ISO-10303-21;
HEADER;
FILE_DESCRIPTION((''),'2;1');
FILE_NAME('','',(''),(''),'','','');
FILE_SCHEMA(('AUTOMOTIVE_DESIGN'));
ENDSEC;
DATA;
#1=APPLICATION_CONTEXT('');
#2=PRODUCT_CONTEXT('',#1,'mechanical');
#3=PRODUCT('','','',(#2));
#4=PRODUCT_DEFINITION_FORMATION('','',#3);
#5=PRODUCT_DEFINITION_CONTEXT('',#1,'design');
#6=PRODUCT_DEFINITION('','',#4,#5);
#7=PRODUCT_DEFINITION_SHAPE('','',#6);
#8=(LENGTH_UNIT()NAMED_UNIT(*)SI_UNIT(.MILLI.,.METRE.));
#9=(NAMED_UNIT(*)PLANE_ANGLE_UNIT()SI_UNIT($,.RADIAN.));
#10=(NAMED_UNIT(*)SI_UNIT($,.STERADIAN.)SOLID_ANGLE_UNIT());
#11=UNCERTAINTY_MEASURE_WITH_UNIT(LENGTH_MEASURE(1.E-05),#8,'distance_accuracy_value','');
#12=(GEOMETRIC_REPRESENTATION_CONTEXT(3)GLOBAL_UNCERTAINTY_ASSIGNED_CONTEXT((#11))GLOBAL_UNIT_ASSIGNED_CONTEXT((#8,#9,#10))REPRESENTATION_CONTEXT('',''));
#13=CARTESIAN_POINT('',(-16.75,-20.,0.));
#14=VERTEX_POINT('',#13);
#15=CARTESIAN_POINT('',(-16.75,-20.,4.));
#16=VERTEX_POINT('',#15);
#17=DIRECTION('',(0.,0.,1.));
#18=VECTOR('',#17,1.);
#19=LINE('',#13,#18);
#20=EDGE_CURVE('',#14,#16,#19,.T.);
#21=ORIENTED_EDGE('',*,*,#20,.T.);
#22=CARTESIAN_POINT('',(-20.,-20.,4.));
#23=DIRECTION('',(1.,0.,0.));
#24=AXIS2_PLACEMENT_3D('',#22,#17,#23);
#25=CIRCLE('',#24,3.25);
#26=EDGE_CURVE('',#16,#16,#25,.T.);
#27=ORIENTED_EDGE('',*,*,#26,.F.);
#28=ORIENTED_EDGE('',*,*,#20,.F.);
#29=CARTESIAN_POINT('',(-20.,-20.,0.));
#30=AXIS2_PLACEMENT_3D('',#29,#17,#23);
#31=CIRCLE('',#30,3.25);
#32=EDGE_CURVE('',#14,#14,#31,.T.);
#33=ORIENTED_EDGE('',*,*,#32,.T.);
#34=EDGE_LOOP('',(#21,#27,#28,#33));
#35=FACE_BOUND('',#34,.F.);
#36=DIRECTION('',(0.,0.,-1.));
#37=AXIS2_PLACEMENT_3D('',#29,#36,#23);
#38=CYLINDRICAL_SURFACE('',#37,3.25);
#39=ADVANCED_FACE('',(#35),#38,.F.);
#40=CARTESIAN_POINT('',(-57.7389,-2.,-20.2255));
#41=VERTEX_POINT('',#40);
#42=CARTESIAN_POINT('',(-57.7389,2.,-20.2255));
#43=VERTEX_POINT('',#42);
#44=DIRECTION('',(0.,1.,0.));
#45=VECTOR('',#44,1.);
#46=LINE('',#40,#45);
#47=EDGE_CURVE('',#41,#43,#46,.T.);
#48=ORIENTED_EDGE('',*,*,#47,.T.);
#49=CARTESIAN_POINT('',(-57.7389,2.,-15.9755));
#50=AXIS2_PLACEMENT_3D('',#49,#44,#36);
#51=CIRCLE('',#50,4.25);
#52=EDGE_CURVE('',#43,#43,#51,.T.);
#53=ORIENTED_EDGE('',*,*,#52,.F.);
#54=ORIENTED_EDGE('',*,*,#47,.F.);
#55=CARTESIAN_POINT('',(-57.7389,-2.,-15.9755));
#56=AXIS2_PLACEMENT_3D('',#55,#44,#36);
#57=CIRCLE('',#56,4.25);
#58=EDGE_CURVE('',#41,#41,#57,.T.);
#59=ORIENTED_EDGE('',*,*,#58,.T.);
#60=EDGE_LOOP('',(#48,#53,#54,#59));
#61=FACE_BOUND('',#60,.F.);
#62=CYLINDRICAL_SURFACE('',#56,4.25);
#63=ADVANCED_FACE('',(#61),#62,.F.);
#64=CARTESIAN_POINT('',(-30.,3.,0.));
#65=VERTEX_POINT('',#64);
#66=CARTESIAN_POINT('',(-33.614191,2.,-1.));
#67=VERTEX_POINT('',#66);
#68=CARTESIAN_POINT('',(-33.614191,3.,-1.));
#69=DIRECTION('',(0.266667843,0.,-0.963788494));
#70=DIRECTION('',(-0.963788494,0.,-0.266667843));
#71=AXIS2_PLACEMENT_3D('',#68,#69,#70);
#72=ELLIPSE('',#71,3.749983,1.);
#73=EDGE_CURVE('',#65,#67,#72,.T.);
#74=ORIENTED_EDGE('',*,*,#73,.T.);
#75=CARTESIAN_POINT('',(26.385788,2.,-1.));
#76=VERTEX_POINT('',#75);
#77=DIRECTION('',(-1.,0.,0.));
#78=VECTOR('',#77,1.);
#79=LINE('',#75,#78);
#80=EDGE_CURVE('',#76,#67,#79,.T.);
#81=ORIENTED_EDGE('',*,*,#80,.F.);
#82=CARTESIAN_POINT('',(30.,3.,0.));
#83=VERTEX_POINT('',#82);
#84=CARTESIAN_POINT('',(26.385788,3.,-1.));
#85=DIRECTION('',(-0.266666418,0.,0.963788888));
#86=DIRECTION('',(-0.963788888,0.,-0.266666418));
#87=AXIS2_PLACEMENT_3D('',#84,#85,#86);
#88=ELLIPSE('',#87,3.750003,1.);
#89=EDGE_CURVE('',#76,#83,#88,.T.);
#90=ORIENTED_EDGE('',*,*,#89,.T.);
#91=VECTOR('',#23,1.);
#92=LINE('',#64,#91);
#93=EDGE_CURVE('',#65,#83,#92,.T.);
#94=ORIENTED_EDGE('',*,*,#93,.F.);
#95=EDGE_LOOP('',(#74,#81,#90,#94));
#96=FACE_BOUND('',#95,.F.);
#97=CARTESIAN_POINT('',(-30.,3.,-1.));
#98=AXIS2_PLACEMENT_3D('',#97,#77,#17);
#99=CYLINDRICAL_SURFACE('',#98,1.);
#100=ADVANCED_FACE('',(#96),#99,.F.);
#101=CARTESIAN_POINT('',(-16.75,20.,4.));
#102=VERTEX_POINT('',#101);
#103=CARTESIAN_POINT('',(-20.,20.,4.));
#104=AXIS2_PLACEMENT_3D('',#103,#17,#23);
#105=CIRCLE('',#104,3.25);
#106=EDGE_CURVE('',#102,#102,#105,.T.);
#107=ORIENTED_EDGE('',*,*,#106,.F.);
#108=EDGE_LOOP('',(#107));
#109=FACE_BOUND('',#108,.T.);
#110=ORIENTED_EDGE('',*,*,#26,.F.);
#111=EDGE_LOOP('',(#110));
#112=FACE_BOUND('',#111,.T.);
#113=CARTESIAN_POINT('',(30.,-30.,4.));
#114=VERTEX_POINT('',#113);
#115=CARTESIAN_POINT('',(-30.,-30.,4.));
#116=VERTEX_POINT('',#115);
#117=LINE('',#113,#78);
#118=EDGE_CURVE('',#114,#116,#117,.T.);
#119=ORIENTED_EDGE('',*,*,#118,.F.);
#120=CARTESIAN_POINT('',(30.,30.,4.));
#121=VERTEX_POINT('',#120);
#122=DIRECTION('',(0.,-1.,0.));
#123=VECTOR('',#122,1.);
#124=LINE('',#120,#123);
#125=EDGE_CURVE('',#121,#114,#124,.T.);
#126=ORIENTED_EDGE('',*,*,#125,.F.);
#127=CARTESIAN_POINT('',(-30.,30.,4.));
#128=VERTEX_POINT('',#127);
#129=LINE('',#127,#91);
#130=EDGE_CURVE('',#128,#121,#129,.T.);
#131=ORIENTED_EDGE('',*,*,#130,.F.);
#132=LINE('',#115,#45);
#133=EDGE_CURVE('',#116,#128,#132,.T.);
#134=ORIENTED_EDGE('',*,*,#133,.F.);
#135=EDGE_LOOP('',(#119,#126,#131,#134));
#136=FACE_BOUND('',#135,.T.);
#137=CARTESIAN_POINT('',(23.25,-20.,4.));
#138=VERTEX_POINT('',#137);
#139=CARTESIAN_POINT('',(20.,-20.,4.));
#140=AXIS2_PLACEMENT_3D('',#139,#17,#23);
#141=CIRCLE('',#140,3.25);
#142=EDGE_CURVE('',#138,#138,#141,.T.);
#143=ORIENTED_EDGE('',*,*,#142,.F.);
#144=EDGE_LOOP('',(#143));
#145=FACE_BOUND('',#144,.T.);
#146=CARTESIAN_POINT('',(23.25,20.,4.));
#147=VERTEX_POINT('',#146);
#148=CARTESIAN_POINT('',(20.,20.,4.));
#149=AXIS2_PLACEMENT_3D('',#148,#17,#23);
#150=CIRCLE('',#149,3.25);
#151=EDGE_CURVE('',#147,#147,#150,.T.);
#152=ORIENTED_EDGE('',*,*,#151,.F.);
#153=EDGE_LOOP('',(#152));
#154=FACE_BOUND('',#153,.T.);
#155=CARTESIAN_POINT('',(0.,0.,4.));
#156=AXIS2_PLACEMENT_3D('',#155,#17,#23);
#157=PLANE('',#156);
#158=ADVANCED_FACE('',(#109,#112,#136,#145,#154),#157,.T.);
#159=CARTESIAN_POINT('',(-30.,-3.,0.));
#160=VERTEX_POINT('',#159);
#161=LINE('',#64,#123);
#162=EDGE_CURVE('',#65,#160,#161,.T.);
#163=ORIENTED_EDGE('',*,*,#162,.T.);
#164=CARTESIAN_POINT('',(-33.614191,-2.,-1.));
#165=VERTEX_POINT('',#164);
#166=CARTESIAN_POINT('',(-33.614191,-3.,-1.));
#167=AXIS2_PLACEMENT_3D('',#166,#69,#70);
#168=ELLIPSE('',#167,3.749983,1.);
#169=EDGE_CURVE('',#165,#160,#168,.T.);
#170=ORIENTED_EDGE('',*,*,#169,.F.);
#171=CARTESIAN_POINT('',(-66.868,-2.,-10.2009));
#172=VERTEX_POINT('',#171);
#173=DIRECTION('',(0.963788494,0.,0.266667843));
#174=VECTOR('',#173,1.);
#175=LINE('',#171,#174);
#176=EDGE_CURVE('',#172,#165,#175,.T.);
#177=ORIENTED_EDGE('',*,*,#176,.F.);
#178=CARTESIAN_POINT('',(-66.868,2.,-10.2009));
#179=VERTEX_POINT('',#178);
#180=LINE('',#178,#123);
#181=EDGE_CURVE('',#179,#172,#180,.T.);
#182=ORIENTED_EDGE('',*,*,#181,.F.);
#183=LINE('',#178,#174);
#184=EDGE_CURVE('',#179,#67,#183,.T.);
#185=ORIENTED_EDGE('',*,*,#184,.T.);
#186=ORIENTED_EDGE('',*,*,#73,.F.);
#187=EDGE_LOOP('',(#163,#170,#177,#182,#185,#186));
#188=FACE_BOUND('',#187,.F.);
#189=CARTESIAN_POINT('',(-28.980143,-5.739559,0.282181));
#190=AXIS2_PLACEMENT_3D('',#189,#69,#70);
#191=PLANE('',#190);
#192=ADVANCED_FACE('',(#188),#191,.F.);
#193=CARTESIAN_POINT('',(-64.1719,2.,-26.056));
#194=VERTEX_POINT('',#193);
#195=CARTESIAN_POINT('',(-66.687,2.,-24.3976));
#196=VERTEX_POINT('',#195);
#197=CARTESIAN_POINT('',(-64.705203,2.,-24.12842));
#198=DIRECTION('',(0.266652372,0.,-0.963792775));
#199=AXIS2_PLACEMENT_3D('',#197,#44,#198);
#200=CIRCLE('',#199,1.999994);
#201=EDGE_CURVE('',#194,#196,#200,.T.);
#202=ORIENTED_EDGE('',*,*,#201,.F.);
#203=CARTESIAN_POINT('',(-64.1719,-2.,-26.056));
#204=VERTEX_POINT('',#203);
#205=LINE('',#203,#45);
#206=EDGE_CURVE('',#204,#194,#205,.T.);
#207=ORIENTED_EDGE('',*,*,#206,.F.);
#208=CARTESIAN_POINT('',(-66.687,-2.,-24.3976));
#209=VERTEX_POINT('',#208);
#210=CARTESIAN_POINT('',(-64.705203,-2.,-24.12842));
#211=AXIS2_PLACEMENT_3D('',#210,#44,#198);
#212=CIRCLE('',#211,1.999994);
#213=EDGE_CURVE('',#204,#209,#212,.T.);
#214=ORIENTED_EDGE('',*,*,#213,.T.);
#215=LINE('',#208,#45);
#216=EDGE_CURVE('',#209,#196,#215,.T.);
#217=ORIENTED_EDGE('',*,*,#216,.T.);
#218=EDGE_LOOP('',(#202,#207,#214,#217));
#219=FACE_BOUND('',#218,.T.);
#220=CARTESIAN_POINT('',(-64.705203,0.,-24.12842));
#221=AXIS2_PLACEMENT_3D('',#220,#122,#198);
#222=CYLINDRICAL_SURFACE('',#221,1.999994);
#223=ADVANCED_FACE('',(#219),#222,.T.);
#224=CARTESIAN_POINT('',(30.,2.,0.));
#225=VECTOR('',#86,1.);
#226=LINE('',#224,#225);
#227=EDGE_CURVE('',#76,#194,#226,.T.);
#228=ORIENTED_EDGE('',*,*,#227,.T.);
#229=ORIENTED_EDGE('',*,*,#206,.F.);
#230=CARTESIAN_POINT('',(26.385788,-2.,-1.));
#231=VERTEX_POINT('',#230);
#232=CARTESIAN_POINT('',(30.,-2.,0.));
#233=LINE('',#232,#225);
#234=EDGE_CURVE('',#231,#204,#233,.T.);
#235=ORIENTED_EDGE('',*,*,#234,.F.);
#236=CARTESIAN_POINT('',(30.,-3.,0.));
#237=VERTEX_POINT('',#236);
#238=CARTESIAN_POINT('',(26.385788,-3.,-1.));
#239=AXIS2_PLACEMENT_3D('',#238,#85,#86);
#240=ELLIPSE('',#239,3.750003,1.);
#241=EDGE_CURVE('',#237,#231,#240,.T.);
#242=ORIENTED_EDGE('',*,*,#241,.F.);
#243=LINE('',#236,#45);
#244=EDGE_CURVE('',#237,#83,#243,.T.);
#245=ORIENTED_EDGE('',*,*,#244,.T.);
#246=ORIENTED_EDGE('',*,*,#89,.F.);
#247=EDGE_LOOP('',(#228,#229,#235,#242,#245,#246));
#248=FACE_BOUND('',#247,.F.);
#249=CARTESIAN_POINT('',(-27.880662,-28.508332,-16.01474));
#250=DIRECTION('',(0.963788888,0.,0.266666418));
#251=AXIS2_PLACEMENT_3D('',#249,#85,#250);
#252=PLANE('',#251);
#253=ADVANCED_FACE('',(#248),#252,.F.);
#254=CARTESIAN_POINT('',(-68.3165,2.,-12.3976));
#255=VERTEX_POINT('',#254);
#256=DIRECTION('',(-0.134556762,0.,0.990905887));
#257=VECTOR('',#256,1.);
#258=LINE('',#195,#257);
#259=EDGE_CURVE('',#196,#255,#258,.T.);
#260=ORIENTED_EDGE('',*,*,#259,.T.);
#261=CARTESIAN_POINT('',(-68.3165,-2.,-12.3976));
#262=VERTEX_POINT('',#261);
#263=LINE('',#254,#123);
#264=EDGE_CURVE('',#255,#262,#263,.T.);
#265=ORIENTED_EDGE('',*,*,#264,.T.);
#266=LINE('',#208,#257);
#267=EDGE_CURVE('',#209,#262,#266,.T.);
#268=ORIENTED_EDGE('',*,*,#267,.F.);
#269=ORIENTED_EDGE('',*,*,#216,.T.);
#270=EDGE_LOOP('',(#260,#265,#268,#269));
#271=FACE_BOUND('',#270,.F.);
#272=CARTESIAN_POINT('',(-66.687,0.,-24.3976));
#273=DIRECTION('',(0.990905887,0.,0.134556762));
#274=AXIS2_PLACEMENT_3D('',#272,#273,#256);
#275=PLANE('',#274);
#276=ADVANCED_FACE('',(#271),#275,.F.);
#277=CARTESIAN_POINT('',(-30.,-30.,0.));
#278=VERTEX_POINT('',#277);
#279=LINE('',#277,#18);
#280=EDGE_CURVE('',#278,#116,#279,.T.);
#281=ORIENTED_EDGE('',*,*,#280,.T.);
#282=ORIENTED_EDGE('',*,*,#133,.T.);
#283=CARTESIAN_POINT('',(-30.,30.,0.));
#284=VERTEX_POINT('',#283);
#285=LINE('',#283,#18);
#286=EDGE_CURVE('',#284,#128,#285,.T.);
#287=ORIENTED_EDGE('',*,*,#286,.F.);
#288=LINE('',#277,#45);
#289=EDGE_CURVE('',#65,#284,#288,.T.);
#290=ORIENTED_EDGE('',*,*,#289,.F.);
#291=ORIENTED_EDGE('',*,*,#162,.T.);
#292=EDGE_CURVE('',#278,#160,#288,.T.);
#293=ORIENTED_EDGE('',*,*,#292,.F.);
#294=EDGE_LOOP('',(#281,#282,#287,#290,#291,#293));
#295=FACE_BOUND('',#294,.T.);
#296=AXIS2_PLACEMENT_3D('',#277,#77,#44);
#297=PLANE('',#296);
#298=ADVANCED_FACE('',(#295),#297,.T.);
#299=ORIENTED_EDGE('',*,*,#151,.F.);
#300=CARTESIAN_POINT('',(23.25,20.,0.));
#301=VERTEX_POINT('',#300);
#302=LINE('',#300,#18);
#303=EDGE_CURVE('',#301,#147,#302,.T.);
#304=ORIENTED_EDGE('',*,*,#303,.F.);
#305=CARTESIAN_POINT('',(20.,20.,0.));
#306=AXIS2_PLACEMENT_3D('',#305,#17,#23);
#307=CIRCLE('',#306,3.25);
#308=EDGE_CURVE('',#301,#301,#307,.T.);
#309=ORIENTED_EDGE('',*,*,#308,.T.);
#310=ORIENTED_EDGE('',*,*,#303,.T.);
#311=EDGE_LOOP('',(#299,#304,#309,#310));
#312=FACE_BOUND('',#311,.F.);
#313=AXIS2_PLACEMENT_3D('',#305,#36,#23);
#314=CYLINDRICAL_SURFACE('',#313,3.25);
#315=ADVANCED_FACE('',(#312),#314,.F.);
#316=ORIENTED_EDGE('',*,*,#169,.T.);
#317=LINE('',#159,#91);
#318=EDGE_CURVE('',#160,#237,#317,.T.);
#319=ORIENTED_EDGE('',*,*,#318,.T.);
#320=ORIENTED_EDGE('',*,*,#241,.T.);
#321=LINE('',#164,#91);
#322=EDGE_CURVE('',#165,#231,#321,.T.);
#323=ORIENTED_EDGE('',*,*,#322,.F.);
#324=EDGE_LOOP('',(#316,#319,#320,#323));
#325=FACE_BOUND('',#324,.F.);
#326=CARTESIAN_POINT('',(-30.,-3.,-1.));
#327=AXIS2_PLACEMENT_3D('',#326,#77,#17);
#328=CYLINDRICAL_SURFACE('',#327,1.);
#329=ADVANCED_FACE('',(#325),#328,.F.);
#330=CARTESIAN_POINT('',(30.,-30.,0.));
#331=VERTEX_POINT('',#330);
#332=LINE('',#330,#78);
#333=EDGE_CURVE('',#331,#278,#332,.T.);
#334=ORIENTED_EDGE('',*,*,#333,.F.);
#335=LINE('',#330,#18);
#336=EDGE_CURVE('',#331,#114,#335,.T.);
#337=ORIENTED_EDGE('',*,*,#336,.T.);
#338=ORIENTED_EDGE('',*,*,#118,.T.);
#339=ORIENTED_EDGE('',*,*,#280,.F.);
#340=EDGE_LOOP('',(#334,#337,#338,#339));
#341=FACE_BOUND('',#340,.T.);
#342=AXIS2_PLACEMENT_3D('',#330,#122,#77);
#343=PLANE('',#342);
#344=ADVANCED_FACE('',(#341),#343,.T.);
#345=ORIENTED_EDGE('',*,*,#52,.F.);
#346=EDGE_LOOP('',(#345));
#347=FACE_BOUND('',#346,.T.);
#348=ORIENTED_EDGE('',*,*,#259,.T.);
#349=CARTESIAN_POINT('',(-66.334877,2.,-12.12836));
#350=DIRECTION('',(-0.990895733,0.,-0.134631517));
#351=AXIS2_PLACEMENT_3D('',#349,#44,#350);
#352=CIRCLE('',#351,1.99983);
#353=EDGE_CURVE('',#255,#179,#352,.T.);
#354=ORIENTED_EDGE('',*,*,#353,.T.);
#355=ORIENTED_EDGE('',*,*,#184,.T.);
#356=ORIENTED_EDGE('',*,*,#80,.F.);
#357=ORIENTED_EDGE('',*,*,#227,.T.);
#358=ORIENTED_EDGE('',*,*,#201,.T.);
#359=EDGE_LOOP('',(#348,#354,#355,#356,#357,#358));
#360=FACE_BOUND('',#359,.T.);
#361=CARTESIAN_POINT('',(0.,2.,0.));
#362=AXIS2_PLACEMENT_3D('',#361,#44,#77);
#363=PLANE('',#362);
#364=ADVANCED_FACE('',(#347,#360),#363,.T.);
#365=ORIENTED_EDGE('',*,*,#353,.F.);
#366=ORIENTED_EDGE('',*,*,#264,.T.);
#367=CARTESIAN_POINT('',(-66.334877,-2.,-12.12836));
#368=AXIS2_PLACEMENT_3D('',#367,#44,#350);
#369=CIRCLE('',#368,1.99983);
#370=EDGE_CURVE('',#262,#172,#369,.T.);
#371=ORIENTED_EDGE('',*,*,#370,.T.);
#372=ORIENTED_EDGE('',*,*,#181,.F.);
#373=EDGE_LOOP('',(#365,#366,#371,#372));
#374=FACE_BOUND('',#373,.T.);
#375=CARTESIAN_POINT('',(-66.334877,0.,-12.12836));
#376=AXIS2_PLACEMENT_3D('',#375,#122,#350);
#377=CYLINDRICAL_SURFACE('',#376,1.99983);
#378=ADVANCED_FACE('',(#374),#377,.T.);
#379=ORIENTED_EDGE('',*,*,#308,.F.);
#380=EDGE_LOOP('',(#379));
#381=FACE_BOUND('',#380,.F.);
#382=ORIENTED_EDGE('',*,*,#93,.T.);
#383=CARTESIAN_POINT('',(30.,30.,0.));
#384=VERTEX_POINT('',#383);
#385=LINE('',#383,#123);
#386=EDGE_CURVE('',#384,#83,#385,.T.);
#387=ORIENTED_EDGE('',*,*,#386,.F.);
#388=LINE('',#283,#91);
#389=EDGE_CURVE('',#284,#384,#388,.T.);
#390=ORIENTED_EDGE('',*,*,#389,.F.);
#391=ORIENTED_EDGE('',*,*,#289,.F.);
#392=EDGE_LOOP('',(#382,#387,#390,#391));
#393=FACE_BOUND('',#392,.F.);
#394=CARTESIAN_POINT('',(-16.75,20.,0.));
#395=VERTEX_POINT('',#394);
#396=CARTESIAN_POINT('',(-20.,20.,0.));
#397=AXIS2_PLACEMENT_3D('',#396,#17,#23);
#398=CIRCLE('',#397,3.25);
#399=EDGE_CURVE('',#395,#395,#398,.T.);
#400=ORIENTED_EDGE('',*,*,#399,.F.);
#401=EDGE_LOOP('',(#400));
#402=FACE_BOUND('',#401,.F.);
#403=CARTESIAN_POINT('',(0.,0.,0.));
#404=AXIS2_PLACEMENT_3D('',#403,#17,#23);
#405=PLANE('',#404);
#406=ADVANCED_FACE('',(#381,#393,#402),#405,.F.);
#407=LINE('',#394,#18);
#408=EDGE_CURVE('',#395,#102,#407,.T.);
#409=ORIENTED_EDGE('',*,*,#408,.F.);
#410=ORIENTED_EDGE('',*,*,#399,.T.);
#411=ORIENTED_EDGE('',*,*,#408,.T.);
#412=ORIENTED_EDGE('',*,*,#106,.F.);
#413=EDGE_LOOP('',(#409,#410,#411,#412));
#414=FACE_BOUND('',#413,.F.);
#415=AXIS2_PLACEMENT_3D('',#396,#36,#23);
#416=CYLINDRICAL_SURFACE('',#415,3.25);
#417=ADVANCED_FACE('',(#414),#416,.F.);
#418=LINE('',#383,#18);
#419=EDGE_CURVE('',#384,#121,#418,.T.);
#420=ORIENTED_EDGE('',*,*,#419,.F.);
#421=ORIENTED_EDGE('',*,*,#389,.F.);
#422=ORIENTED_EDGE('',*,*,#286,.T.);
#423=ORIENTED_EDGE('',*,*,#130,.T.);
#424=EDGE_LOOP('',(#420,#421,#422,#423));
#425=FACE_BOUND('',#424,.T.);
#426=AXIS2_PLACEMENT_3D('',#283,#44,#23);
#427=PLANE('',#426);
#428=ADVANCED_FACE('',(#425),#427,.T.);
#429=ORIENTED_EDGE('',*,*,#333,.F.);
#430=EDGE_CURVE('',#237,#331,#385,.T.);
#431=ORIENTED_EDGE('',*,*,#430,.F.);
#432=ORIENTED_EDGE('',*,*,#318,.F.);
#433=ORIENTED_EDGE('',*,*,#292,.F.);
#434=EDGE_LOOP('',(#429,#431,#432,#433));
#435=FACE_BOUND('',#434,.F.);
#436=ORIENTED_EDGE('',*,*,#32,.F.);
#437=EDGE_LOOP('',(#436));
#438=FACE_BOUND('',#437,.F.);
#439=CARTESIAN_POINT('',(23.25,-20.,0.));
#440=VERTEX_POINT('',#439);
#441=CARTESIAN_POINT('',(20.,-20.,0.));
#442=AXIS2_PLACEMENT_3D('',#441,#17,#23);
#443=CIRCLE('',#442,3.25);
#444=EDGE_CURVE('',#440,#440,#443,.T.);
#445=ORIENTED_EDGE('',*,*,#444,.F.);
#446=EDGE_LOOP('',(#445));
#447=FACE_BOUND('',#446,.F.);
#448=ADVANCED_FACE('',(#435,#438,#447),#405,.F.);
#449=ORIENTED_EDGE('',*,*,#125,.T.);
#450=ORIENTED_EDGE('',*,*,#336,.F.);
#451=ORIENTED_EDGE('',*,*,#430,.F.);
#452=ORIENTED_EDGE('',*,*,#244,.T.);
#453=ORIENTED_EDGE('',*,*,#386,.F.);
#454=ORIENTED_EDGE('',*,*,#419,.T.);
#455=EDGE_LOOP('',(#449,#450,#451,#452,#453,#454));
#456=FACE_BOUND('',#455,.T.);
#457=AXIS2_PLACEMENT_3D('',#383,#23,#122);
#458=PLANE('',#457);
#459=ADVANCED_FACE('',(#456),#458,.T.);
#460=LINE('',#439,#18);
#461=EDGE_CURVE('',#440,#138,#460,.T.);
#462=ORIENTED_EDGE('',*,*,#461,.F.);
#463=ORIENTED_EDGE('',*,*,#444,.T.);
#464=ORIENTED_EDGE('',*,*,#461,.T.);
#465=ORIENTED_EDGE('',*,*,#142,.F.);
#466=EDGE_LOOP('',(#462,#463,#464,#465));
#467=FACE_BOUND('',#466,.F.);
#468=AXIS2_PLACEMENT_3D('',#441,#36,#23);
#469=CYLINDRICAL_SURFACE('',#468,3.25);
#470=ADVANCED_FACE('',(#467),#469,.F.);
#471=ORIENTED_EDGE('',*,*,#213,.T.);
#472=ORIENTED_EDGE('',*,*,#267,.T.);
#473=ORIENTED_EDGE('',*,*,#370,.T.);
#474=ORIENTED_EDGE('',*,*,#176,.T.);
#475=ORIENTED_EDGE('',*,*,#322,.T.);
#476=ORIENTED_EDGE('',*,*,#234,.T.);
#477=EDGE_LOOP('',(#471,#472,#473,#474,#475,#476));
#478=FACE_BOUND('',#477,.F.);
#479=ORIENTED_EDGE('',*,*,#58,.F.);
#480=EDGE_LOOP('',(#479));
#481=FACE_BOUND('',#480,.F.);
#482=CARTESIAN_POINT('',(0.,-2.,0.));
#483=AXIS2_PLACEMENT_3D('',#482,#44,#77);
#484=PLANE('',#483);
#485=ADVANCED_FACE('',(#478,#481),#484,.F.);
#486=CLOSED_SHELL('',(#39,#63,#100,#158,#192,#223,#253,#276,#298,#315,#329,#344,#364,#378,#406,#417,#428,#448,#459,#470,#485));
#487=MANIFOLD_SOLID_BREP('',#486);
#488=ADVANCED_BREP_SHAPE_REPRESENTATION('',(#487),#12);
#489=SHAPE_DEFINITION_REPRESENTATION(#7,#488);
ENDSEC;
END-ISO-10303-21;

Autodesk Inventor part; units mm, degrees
ref_plane "YZ Plane" through (0, 0, 0) normal (1, 0, 0) x (0, 1, 0)
ref_plane "XZ Plane" through (0, 0, 0) normal (0, 1, 0) x (-1, 0, 0)
ref_plane "XY Plane" through (0, 0, 0) normal (0, 0, 1) x (1, 0, 0)
sketch "Sketch2" plane through (0, 0, 0) normal (0, 0, 1) x (1, 0, 0)
  line L0 (30, -30) -> (-30, -30)
  line L1 (-30, -30) -> (-30, 30)
  line L2 (-30, 30) -> (30, 30)
  line L3 (30, 30) -> (30, -30)
  line L4 (30, -30) -> (-30, 30) construction
  line L5 (-30, -30) -> (30, 30) construction
  circle A0 centre (-20, 20) radius 3.25
  circle A1 centre (20, 20) radius 3.25
  circle A2 centre (-20, -20) radius 3.25
  circle A3 centre (20, -20) radius 3.25
  point P0 (0, 0)
  dimension "d0" = 60
  dimension "d1" = 60
  dimension "d13" = 6.5
  dimension "d14" = 6.5
  dimension "d15" = 6.5
  dimension "d16" = 6.5
  dimension "d17" = 10
  dimension "d19" = 10
  dimension "d20" = 10
  dimension "d21" = 10
extrude "Extrusion1" add sketch "Sketch2" along normal blind 4
sketch "Sketch5" plane through (0, 0, 0) normal (0, 1, 0) x (-1, 0, 0)
  line L0 (-30, 0) -> (30, 0) construction
  line L1 (30, 0) -> (30, 4) construction
  line L2 (-30, 4) -> (30, 4) construction
  line L3 (-30, 0) -> (-30, 4) construction
  line L4 (88.4744, 0) -> (-49.7457, 0) construction
  line L5 (-30, 0) -> (64.1719, -26.056)
  line L6 (66.687, -24.3976) -> (68.3165, -12.3976)
  line L7 (66.868, -10.2009) -> (30, 0)
  line L8 (30, 0) -> (-30, 0)
  arc A0 (68.3165, -12.3976) -> (66.868, -10.2009) centre (66.3347, -12.1284) ccw
  arc A1 (64.1719, -26.056) -> (66.687, -24.3976) centre (64.7052, -24.1284) ccw
  point P0 (66.3789, -26.6667)
  point P1 (68.5516, -10.6667)
  dimension "d26" = 100
  dimension "d31" = 40
  dimension "d32" = 2
  dimension "d37" = 16
extrude "Extrusion3" add sketch "Sketch5" along normal mid plane 4
fillet "Fillet1" radius 1 2 edges at (0, 2, 0) (0, -2, 0)
sketch "Sketch6" plane through (0, -2, 0) normal (0, -1, 0) x (1, 0, 0)
  line L0 (-33.6142, -1) -> (26.3858, -1) construction
  line L1 (-33.6142, -1) -> (-66.868, -10.2009) construction
  arc A0 (-66.868, -10.2009) -> (-68.3165, -12.3976) centre (-66.3347, -12.1284) ccw construction
  line L2 (-68.3165, -12.3976) -> (-66.687, -24.3976) construction
  arc A1 (-66.687, -24.3976) -> (-64.1719, -26.056) centre (-64.7052, -24.1284) ccw construction
  line L3 (-64.1719, -26.056) -> (26.3858, -1) construction
  point P0 (0, 0)
  point P1 (-57.7389, -15.9755)
  dimension "d34" = 16
  dimension "d35" = 8
  dimension "d36" = 10
hole "Hole1" at (-57.7389, -2, -15.9755) direction (0, 1, 0) diameter 8.5 depth 10
equation "\"d35\" = 0.5 * d34"
properties part number "P044_SupportCaméra"
